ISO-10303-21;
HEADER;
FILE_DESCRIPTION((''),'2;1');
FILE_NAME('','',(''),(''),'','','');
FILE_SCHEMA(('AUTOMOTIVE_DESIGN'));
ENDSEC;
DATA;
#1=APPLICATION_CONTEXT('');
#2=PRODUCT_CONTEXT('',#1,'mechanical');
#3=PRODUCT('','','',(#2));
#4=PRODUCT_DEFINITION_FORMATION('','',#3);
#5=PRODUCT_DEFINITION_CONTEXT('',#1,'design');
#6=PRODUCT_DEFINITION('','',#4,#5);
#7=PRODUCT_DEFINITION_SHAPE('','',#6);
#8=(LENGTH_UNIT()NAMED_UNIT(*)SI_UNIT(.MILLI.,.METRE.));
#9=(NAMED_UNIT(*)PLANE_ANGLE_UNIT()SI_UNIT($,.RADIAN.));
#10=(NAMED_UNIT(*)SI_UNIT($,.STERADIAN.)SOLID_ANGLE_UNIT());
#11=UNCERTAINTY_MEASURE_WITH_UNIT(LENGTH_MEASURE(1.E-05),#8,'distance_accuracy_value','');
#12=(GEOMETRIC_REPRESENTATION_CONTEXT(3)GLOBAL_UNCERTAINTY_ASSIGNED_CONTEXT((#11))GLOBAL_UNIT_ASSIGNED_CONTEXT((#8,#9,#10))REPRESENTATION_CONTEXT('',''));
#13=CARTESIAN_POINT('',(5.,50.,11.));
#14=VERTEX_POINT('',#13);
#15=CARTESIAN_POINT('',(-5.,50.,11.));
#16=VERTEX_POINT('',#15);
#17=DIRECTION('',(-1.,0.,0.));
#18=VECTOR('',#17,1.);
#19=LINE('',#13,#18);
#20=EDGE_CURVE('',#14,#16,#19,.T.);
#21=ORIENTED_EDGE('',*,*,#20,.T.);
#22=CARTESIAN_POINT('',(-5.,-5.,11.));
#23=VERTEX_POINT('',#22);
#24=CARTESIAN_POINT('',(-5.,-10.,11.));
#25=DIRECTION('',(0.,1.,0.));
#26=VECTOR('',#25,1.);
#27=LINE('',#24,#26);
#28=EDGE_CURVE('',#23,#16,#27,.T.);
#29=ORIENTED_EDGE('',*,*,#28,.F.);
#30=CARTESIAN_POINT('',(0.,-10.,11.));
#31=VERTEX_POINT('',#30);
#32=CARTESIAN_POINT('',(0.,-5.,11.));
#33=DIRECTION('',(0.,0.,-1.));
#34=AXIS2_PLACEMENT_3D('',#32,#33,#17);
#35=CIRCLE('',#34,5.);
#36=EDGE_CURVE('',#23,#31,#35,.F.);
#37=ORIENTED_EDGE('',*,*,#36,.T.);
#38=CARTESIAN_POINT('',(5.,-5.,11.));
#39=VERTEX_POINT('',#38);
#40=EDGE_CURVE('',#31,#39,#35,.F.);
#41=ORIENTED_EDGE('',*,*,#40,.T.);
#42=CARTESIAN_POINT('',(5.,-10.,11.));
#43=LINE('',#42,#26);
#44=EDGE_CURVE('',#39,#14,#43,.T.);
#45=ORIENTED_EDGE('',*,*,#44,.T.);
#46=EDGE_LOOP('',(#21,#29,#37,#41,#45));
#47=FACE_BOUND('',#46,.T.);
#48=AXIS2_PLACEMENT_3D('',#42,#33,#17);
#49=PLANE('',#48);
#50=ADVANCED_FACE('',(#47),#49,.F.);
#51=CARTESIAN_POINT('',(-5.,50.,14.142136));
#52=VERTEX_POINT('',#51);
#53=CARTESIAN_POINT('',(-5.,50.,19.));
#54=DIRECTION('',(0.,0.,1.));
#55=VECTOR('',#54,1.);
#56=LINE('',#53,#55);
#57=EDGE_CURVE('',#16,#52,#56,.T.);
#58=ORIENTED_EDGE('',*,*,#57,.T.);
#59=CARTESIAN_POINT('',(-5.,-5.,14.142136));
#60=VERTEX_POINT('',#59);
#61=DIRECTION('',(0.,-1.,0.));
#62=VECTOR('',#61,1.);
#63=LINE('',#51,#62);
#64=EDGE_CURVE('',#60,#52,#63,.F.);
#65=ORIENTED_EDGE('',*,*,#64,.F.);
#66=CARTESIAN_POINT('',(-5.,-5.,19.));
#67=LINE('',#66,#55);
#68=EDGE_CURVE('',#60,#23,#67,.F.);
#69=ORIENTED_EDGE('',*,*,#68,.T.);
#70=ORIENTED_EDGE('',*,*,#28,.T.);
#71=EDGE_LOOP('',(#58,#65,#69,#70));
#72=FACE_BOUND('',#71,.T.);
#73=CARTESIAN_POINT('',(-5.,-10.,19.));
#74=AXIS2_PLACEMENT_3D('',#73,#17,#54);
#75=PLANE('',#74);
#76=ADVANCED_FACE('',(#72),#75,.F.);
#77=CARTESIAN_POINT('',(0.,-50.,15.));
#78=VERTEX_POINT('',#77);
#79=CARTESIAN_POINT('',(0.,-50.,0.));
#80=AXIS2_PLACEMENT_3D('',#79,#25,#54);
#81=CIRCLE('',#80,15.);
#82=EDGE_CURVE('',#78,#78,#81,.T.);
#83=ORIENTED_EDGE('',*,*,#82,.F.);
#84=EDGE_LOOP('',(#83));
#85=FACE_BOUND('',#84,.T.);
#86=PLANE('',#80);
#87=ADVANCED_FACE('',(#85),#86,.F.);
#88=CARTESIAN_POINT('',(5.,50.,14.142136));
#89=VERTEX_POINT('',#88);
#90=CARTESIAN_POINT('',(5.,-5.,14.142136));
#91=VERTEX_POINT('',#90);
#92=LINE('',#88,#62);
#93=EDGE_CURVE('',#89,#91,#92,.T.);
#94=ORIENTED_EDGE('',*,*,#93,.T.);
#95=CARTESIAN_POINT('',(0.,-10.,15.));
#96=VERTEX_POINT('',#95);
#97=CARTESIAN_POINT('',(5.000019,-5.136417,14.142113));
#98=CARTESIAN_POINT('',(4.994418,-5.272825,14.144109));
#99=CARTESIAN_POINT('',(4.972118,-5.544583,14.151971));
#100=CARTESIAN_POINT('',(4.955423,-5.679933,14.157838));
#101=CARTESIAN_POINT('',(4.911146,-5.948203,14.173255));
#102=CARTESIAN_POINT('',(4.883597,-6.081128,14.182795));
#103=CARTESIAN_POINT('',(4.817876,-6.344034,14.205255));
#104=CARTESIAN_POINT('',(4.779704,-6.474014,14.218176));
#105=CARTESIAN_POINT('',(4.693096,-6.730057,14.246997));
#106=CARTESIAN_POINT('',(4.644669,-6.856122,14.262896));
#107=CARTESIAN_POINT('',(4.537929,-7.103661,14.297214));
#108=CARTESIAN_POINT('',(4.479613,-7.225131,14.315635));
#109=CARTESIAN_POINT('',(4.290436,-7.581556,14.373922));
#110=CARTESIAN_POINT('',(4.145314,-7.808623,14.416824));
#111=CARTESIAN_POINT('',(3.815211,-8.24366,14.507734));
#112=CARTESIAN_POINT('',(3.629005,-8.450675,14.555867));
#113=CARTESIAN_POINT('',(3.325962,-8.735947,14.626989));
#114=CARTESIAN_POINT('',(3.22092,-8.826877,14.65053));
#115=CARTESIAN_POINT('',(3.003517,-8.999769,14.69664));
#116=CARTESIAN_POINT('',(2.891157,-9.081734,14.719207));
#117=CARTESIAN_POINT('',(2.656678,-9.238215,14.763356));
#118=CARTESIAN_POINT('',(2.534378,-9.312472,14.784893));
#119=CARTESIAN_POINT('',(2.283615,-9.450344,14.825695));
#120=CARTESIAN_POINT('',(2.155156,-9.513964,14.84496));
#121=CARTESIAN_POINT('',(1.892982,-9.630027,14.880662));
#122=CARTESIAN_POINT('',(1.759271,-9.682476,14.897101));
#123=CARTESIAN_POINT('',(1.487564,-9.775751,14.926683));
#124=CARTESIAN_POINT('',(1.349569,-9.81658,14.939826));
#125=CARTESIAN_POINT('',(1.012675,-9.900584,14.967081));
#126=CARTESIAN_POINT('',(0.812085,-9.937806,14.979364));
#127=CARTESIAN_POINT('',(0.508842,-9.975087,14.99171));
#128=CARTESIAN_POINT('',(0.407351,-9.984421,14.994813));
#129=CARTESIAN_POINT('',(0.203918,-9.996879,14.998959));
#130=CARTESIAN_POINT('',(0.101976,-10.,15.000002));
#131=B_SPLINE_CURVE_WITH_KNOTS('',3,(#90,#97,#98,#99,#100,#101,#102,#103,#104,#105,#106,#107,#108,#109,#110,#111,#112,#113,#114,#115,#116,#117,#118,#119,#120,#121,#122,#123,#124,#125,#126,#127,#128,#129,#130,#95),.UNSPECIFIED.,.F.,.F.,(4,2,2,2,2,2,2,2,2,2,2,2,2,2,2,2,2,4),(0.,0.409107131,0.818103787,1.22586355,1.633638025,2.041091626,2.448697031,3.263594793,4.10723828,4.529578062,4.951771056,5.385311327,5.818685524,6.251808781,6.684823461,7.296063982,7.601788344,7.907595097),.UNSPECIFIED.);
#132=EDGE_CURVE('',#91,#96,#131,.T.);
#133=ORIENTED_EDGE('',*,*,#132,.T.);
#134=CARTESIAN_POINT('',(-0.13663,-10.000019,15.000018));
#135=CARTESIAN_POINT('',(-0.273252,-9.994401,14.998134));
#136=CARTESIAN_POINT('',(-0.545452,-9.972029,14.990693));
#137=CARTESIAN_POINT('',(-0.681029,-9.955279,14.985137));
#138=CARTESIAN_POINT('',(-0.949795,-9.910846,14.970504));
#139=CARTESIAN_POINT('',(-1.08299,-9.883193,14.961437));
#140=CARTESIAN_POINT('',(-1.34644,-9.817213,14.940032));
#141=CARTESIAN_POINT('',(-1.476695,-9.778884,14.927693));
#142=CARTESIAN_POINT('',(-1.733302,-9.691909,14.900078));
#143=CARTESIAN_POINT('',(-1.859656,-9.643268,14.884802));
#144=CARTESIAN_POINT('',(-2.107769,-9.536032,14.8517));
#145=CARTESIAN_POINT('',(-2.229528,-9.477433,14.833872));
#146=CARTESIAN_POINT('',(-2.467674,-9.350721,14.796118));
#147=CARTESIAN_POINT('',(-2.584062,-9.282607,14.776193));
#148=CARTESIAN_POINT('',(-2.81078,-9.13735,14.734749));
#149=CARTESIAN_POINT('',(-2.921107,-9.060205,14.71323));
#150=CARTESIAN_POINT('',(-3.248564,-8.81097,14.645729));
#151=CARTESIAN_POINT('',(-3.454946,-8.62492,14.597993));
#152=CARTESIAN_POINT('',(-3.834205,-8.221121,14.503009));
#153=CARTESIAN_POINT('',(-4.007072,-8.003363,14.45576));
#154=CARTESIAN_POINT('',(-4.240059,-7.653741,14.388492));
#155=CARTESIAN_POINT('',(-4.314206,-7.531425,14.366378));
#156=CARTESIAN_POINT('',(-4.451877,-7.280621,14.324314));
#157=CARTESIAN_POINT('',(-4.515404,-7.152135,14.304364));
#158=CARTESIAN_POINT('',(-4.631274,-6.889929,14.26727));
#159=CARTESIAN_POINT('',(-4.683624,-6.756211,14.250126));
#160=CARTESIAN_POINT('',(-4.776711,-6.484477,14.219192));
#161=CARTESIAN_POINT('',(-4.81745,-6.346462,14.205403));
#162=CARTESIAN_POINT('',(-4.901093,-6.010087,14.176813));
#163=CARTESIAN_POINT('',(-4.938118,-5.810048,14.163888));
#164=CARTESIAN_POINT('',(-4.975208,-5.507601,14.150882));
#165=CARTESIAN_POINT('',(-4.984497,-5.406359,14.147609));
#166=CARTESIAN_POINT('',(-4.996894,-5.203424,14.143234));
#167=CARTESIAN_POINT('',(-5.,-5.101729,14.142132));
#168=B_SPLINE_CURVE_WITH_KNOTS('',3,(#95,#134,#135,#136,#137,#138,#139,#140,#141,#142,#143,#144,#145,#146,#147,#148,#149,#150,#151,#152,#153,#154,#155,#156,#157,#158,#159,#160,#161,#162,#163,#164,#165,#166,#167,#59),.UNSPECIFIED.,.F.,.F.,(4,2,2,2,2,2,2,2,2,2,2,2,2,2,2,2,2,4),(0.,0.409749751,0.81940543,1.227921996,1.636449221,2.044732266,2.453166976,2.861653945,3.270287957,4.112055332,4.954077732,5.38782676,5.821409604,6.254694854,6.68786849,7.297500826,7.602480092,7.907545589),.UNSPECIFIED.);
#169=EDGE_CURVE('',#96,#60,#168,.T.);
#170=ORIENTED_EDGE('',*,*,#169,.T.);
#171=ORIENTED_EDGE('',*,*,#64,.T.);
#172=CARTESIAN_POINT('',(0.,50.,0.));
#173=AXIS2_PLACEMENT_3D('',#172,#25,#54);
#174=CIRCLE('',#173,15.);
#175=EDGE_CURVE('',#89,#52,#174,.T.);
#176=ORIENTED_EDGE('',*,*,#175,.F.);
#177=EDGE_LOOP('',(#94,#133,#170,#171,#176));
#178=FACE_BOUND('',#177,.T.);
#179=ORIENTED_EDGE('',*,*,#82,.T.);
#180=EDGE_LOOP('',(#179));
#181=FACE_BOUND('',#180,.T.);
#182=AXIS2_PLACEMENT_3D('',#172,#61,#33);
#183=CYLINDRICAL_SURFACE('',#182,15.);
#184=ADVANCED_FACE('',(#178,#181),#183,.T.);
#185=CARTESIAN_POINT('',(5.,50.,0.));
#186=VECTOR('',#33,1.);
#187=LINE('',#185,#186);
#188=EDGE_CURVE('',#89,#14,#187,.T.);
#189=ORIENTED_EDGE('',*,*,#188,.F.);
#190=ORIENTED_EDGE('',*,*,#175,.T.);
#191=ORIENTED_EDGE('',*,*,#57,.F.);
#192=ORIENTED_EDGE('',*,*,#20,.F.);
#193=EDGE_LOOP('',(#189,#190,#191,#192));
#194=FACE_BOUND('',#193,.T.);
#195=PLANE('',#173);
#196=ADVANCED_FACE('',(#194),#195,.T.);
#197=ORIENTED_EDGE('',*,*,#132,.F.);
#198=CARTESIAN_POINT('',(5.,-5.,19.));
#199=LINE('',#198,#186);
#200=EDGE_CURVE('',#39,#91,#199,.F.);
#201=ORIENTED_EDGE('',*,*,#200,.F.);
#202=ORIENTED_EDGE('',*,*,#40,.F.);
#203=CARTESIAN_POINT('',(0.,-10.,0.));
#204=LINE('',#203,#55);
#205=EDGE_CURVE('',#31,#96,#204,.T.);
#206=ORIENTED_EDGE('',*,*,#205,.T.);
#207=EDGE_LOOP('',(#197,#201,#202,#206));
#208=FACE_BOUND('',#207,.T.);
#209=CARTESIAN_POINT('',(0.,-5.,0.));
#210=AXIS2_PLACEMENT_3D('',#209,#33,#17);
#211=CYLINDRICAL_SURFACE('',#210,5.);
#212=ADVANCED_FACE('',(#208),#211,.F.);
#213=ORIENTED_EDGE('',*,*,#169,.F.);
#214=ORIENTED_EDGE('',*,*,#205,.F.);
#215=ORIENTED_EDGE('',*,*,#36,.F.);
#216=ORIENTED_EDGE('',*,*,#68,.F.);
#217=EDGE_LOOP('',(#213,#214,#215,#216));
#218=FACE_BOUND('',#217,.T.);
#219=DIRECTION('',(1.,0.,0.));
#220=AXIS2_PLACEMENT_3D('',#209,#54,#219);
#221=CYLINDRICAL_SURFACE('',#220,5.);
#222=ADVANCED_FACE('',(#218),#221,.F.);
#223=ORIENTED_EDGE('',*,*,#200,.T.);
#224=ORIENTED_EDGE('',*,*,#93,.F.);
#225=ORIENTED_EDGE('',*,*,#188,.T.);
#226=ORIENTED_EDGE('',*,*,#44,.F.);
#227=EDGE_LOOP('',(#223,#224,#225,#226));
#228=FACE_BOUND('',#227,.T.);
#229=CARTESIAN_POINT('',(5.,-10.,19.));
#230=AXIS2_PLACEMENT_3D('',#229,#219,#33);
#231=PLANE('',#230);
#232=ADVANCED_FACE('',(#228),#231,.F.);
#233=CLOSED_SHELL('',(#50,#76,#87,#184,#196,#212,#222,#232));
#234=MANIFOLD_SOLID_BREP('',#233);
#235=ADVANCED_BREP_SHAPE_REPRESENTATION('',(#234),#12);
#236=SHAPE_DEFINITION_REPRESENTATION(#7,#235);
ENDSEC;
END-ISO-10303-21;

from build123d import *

# Parameters (mm, degrees)
SKETCH2_R           = 15
BOSS_EXTRUDE1_DEPTH = 50
SKETCH3_W           = 10
SKETCH3_H           = 8
CUT_EXTRUDE1_DEPTH  = 60
FILLET1_R           = 5


with BuildPart() as part:
    # Sketch2 → Boss-Extrude1 (new, symmetric)
    with BuildSketch(Plane(origin=(0, 0, 0), x_dir=(-1, 0, 0), z_dir=(0, 1, 0))):
        with Locations(Location((0, 0, 0), (0, 0, 90))):
            Circle(SKETCH2_R)
    extrude(amount=BOSS_EXTRUDE1_DEPTH, both=True)

    # Sketch3 → Cut-Extrude1 (cut)
    with BuildSketch(Plane(origin=(0, 50, 0), x_dir=(-1, 0, 0), z_dir=(0, 1, 0))):
        with Locations((0, 15)):
            Rectangle(SKETCH3_W, SKETCH3_H)
    extrude(amount=-CUT_EXTRUDE1_DEPTH, mode=Mode.SUBTRACT)

    # Fillet1
    fillet1_edges = [part.edges().sort_by_distance(p)[0] for p in [
        (5, -10, 12.571067812),
        (-5, -10, 12.571067812),
    ]]
    fillet(fillet1_edges, radius=FILLET1_R - 0.0001)  # a hair under: the kernel refuses the full size


solid = part.part
